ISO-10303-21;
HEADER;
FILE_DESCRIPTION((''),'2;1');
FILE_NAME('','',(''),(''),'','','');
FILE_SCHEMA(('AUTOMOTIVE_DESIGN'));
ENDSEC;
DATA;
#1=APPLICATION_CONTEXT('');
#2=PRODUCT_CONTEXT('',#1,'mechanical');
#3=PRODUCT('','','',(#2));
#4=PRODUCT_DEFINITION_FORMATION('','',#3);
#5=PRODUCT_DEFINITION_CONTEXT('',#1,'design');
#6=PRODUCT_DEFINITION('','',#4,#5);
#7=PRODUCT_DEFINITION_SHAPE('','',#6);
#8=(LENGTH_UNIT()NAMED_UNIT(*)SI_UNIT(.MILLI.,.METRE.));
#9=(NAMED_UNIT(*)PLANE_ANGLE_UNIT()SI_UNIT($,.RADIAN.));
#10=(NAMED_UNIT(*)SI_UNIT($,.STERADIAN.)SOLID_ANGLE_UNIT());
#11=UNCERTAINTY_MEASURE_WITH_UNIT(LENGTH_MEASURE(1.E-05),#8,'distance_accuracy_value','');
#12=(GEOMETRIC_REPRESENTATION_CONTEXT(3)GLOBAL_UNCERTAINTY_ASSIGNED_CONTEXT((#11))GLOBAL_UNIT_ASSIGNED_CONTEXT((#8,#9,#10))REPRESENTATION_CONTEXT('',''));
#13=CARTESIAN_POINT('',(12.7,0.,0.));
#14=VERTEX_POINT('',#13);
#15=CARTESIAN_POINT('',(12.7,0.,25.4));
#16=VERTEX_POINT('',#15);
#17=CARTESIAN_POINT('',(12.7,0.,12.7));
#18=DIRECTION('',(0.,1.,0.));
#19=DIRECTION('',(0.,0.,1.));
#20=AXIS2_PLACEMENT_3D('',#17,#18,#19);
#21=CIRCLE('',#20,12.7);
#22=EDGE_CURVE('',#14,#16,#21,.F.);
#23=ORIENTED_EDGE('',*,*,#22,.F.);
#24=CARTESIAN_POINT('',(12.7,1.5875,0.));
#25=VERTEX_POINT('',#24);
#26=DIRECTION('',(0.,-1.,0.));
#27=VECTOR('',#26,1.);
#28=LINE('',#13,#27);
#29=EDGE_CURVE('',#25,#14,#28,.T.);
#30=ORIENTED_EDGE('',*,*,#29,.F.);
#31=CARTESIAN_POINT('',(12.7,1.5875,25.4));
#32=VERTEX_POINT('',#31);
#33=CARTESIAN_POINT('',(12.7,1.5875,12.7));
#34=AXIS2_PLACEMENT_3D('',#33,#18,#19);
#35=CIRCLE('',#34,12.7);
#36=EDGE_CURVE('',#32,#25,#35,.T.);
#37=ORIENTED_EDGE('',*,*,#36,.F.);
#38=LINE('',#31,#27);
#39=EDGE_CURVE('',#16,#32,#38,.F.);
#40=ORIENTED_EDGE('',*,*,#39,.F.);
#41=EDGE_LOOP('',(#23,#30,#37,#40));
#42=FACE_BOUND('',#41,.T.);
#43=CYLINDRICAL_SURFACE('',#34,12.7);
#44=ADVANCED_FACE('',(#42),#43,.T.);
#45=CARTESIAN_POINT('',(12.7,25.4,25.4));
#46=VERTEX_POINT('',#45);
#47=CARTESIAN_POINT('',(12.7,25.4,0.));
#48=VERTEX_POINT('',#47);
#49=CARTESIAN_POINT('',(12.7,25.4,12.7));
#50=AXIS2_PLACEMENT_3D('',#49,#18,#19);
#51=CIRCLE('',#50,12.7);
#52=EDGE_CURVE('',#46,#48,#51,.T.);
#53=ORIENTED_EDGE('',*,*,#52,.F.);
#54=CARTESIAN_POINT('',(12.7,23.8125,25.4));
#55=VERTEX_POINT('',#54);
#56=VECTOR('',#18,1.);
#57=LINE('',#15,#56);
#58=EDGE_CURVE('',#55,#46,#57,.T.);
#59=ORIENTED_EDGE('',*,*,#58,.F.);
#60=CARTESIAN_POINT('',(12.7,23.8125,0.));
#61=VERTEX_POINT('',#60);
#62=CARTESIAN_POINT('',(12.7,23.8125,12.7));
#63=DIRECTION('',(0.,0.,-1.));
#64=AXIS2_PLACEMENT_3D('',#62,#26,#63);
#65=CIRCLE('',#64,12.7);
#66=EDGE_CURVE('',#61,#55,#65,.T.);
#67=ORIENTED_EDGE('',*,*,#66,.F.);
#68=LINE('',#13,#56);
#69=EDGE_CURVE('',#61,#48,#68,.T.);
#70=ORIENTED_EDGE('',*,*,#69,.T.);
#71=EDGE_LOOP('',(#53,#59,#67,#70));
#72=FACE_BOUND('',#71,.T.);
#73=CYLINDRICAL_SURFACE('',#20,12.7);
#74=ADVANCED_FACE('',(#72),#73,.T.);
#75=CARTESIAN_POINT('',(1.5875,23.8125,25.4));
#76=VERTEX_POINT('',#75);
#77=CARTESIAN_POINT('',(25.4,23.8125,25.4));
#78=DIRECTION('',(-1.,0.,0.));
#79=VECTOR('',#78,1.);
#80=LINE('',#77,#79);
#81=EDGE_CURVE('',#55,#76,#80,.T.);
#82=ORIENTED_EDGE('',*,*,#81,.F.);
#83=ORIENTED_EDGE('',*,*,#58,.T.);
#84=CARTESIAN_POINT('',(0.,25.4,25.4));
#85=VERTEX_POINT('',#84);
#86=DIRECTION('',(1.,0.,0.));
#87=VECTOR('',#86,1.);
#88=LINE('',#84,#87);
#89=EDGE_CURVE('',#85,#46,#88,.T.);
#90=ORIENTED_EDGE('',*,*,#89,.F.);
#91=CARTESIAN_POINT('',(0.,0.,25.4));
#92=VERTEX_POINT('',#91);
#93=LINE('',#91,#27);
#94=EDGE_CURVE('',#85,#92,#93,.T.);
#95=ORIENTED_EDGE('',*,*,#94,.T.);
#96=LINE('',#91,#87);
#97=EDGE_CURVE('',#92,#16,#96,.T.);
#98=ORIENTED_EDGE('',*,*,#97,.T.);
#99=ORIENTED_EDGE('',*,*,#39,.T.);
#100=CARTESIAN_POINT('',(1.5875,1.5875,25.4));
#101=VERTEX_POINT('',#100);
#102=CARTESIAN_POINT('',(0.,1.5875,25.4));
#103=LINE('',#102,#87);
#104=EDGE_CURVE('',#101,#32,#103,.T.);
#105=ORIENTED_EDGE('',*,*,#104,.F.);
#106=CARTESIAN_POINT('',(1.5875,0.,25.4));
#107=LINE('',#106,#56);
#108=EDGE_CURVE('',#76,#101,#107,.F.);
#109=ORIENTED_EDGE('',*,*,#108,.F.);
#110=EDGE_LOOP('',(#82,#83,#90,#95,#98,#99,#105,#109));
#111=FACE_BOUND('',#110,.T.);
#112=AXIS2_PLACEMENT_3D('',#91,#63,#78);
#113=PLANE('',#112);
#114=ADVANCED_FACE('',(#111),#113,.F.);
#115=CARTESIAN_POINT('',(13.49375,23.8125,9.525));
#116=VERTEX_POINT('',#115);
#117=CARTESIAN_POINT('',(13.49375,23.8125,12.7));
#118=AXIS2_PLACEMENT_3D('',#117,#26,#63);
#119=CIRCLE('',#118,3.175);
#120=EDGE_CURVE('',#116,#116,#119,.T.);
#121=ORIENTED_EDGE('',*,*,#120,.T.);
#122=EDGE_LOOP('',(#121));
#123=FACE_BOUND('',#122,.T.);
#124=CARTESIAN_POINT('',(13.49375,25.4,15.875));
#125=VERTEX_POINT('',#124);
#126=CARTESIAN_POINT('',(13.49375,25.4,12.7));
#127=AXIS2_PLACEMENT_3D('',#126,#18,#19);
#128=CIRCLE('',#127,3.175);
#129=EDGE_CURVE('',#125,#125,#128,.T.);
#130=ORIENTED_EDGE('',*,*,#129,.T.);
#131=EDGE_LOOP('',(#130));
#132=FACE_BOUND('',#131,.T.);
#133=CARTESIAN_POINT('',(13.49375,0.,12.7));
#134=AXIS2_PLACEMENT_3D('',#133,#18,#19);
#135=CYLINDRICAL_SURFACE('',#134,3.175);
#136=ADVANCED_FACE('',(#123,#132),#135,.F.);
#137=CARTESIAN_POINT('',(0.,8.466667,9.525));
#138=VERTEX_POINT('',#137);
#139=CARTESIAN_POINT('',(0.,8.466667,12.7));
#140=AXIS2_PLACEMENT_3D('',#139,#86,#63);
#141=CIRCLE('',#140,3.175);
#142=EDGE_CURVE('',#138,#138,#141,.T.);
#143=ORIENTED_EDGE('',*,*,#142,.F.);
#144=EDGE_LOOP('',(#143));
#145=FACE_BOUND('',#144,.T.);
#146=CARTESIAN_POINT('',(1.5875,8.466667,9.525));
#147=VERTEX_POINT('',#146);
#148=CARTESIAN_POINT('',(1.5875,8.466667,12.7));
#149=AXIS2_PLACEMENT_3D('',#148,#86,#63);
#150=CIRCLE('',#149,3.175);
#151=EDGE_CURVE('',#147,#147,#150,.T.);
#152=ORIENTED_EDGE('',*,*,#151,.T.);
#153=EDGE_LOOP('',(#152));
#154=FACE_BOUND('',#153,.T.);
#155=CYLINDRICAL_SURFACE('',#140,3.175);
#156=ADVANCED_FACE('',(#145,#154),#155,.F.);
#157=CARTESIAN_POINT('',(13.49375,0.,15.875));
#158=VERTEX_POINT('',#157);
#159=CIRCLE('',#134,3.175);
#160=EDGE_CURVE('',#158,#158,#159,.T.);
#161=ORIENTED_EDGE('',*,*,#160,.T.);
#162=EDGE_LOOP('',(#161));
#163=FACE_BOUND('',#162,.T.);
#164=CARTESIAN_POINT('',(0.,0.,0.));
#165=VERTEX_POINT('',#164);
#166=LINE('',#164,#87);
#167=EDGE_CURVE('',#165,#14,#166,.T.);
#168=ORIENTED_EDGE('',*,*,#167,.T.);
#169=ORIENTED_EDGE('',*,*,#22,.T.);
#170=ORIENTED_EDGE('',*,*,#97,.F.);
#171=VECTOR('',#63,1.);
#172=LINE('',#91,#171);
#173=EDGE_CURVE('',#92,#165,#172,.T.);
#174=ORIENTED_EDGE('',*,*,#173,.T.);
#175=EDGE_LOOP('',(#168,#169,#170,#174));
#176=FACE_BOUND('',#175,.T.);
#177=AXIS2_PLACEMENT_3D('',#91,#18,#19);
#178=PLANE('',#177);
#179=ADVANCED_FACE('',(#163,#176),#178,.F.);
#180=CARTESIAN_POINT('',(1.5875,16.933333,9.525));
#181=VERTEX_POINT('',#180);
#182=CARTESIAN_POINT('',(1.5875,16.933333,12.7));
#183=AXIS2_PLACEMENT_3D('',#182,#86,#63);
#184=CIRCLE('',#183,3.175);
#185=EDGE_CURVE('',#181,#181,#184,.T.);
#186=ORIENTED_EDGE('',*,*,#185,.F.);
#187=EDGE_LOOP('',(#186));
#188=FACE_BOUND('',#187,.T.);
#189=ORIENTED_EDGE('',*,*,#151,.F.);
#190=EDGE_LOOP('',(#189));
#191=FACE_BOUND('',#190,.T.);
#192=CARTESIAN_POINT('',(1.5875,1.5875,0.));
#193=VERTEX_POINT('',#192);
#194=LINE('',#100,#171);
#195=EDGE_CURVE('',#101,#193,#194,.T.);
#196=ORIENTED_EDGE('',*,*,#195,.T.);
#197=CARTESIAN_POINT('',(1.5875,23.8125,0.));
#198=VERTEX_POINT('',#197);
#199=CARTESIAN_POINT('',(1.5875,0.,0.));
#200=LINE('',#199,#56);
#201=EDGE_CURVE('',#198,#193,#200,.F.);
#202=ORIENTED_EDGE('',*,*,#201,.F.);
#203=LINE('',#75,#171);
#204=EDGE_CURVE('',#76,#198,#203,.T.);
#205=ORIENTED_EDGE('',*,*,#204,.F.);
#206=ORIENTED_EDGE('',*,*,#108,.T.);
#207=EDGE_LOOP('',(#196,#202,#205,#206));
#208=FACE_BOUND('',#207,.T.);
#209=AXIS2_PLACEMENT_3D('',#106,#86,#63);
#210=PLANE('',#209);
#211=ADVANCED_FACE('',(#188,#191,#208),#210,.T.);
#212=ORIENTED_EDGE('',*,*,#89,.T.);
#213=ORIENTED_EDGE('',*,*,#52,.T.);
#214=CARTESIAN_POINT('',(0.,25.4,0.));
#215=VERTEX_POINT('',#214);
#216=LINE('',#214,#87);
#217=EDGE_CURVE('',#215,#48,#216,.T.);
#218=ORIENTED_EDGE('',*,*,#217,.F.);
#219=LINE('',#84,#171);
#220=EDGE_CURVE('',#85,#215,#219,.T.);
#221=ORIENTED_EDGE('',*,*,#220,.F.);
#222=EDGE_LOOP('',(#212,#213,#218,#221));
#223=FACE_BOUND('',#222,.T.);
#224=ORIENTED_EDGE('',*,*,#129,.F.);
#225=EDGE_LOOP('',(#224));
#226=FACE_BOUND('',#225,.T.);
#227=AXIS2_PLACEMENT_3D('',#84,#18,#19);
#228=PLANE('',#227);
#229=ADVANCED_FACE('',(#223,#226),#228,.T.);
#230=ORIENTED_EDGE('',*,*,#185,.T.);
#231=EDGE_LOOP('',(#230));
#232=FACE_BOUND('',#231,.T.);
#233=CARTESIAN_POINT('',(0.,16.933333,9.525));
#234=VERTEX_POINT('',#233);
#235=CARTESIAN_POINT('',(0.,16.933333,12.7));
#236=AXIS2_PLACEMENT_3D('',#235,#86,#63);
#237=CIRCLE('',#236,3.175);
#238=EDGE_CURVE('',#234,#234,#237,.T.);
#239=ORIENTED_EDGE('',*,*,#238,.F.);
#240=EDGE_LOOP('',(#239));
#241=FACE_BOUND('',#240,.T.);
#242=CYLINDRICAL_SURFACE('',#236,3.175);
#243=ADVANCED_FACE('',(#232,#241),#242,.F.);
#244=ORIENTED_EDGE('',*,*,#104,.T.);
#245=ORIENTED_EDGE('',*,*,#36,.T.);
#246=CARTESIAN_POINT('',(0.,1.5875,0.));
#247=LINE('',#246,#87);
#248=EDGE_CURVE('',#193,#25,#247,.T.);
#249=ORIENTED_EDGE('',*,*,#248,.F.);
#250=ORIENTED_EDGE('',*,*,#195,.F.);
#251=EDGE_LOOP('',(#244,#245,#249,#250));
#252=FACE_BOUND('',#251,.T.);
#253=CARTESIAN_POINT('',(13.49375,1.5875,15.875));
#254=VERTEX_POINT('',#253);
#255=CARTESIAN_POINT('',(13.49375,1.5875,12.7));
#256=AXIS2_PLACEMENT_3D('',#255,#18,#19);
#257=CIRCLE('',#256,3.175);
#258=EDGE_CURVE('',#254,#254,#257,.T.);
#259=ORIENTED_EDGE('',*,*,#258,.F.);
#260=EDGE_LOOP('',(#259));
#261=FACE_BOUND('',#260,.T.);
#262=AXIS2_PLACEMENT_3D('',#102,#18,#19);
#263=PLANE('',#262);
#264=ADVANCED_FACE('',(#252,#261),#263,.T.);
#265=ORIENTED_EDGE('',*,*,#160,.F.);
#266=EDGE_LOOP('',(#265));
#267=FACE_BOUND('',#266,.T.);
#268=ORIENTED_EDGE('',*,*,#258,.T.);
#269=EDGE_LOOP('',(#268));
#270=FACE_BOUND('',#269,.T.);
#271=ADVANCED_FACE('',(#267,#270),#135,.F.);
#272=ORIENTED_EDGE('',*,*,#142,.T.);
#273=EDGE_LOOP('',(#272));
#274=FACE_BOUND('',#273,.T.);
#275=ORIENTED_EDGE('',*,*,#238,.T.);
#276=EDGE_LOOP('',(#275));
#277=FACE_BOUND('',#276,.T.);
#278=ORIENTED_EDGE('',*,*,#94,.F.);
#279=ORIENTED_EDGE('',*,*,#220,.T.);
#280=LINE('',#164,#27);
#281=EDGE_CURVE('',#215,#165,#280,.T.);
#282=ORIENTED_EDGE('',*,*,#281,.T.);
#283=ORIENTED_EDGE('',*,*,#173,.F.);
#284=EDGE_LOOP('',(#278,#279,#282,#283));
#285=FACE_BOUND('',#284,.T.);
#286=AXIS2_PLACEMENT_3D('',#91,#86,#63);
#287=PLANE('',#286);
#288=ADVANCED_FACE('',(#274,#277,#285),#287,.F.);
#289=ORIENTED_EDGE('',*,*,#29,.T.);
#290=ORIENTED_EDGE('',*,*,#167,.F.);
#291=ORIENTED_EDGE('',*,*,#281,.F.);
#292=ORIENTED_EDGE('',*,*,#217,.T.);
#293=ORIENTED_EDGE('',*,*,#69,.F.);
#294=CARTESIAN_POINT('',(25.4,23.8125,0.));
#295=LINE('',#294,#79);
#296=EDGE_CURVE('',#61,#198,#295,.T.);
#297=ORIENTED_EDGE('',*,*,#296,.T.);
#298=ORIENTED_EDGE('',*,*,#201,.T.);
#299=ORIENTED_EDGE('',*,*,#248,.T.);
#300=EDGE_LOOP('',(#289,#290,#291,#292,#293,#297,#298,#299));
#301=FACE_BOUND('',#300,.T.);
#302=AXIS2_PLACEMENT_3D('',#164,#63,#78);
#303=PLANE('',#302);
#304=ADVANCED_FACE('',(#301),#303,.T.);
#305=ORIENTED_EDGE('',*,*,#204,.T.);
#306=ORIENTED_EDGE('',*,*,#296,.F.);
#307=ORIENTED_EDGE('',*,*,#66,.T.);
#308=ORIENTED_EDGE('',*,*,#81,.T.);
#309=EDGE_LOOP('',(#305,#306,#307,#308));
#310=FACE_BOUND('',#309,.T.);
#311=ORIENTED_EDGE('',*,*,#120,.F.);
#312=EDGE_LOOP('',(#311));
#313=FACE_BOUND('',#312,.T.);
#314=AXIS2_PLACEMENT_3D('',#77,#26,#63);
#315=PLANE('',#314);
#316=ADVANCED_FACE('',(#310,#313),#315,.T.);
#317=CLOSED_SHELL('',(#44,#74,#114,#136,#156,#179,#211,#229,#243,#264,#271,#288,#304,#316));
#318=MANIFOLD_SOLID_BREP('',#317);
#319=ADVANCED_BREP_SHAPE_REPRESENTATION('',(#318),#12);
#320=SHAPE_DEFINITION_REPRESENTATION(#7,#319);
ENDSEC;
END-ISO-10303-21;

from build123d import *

# Parameters (mm, degrees)
EXTRUDE_THIN1_DEPTH = 25.4
SKETCH3_R           = 3.175
CUT_EXTRUDE1_DEPTH  = 44.097043475
FILLET1_R           = 12.7
SKETCH5_W           = 25.4
SKETCH5_H           = 1.5875
BOSS_EXTRUDE1_DEPTH = 25.4
SKETCH6_R           = 3.175
CUT_EXTRUDE3_DEPTH  = 25.4


with BuildPart() as part:
    # Sketch1 → Extrude-Thin1 (new body)
    with BuildSketch(Plane.XY):
        Polygon((0, 25.4), (0, 0), (25.4, 0), (25.4, 1.5875), (1.5875, 1.5875), (1.5875, 25.4), align=None)
    extrude(amount=EXTRUDE_THIN1_DEPTH)

    # Sketch3 → Cut-Extrude1 (cut, through all)
    with BuildSketch(Plane(origin=(1.5875, 0, 0), x_dir=(0, 0, -1), z_dir=(1, 0, 0))):
        with Locations((-12.7, 16.933333333)):
            Circle(SKETCH3_R)
        with Locations((-12.7, 8.466666667)):
            Circle(SKETCH3_R)
    extrude(amount=-CUT_EXTRUDE1_DEPTH, mode=Mode.SUBTRACT)

    # Fillet1
    fillet1_edges = [part.edges().sort_by_distance(p)[0] for p in [
        (25.4, 0.79375, 0),
        (25.4, 0.79375, 25.4),
    ]]
    fillet(fillet1_edges, radius=FILLET1_R - 0.0001)  # a hair under: the kernel refuses the full size

    # Sketch5 → Boss-Extrude1 (add)
    with BuildSketch(Plane.ZY):
        with Locations((12.7, 24.60625)):
            Rectangle(SKETCH5_W, SKETCH5_H)
    extrude(amount=-BOSS_EXTRUDE1_DEPTH)

    # Sketch6 → Cut-Extrude3 (cut)
    with BuildSketch(Plane(origin=(0, 25.4, 0), x_dir=(1, 0, 0), z_dir=(0, 1, 0))):
        with Locations(Location((13.49375, -12.7, 0), (0, 0, 270))):
            Circle(SKETCH6_R)
        with BuildLine():
            Line((25.4, -25.4), (25.4, -12.7))
            ThreePointArc((25.4, -12.7), (21.680256104, -21.680256138), (12.699999951, -25.4))
            Line((12.699999951, -25.4), (25.4, -25.4))
        make_face()
        with BuildLine():
            ThreePointArc((12.7, 0), (21.680256121, -3.719743879), (25.4, -12.7))
            Line((25.4, -12.7), (25.4, 0))
            Line((25.4, 0), (12.7, 0))
        make_face()
    extrude(amount=-CUT_EXTRUDE3_DEPTH, mode=Mode.SUBTRACT)


solid = part.part
